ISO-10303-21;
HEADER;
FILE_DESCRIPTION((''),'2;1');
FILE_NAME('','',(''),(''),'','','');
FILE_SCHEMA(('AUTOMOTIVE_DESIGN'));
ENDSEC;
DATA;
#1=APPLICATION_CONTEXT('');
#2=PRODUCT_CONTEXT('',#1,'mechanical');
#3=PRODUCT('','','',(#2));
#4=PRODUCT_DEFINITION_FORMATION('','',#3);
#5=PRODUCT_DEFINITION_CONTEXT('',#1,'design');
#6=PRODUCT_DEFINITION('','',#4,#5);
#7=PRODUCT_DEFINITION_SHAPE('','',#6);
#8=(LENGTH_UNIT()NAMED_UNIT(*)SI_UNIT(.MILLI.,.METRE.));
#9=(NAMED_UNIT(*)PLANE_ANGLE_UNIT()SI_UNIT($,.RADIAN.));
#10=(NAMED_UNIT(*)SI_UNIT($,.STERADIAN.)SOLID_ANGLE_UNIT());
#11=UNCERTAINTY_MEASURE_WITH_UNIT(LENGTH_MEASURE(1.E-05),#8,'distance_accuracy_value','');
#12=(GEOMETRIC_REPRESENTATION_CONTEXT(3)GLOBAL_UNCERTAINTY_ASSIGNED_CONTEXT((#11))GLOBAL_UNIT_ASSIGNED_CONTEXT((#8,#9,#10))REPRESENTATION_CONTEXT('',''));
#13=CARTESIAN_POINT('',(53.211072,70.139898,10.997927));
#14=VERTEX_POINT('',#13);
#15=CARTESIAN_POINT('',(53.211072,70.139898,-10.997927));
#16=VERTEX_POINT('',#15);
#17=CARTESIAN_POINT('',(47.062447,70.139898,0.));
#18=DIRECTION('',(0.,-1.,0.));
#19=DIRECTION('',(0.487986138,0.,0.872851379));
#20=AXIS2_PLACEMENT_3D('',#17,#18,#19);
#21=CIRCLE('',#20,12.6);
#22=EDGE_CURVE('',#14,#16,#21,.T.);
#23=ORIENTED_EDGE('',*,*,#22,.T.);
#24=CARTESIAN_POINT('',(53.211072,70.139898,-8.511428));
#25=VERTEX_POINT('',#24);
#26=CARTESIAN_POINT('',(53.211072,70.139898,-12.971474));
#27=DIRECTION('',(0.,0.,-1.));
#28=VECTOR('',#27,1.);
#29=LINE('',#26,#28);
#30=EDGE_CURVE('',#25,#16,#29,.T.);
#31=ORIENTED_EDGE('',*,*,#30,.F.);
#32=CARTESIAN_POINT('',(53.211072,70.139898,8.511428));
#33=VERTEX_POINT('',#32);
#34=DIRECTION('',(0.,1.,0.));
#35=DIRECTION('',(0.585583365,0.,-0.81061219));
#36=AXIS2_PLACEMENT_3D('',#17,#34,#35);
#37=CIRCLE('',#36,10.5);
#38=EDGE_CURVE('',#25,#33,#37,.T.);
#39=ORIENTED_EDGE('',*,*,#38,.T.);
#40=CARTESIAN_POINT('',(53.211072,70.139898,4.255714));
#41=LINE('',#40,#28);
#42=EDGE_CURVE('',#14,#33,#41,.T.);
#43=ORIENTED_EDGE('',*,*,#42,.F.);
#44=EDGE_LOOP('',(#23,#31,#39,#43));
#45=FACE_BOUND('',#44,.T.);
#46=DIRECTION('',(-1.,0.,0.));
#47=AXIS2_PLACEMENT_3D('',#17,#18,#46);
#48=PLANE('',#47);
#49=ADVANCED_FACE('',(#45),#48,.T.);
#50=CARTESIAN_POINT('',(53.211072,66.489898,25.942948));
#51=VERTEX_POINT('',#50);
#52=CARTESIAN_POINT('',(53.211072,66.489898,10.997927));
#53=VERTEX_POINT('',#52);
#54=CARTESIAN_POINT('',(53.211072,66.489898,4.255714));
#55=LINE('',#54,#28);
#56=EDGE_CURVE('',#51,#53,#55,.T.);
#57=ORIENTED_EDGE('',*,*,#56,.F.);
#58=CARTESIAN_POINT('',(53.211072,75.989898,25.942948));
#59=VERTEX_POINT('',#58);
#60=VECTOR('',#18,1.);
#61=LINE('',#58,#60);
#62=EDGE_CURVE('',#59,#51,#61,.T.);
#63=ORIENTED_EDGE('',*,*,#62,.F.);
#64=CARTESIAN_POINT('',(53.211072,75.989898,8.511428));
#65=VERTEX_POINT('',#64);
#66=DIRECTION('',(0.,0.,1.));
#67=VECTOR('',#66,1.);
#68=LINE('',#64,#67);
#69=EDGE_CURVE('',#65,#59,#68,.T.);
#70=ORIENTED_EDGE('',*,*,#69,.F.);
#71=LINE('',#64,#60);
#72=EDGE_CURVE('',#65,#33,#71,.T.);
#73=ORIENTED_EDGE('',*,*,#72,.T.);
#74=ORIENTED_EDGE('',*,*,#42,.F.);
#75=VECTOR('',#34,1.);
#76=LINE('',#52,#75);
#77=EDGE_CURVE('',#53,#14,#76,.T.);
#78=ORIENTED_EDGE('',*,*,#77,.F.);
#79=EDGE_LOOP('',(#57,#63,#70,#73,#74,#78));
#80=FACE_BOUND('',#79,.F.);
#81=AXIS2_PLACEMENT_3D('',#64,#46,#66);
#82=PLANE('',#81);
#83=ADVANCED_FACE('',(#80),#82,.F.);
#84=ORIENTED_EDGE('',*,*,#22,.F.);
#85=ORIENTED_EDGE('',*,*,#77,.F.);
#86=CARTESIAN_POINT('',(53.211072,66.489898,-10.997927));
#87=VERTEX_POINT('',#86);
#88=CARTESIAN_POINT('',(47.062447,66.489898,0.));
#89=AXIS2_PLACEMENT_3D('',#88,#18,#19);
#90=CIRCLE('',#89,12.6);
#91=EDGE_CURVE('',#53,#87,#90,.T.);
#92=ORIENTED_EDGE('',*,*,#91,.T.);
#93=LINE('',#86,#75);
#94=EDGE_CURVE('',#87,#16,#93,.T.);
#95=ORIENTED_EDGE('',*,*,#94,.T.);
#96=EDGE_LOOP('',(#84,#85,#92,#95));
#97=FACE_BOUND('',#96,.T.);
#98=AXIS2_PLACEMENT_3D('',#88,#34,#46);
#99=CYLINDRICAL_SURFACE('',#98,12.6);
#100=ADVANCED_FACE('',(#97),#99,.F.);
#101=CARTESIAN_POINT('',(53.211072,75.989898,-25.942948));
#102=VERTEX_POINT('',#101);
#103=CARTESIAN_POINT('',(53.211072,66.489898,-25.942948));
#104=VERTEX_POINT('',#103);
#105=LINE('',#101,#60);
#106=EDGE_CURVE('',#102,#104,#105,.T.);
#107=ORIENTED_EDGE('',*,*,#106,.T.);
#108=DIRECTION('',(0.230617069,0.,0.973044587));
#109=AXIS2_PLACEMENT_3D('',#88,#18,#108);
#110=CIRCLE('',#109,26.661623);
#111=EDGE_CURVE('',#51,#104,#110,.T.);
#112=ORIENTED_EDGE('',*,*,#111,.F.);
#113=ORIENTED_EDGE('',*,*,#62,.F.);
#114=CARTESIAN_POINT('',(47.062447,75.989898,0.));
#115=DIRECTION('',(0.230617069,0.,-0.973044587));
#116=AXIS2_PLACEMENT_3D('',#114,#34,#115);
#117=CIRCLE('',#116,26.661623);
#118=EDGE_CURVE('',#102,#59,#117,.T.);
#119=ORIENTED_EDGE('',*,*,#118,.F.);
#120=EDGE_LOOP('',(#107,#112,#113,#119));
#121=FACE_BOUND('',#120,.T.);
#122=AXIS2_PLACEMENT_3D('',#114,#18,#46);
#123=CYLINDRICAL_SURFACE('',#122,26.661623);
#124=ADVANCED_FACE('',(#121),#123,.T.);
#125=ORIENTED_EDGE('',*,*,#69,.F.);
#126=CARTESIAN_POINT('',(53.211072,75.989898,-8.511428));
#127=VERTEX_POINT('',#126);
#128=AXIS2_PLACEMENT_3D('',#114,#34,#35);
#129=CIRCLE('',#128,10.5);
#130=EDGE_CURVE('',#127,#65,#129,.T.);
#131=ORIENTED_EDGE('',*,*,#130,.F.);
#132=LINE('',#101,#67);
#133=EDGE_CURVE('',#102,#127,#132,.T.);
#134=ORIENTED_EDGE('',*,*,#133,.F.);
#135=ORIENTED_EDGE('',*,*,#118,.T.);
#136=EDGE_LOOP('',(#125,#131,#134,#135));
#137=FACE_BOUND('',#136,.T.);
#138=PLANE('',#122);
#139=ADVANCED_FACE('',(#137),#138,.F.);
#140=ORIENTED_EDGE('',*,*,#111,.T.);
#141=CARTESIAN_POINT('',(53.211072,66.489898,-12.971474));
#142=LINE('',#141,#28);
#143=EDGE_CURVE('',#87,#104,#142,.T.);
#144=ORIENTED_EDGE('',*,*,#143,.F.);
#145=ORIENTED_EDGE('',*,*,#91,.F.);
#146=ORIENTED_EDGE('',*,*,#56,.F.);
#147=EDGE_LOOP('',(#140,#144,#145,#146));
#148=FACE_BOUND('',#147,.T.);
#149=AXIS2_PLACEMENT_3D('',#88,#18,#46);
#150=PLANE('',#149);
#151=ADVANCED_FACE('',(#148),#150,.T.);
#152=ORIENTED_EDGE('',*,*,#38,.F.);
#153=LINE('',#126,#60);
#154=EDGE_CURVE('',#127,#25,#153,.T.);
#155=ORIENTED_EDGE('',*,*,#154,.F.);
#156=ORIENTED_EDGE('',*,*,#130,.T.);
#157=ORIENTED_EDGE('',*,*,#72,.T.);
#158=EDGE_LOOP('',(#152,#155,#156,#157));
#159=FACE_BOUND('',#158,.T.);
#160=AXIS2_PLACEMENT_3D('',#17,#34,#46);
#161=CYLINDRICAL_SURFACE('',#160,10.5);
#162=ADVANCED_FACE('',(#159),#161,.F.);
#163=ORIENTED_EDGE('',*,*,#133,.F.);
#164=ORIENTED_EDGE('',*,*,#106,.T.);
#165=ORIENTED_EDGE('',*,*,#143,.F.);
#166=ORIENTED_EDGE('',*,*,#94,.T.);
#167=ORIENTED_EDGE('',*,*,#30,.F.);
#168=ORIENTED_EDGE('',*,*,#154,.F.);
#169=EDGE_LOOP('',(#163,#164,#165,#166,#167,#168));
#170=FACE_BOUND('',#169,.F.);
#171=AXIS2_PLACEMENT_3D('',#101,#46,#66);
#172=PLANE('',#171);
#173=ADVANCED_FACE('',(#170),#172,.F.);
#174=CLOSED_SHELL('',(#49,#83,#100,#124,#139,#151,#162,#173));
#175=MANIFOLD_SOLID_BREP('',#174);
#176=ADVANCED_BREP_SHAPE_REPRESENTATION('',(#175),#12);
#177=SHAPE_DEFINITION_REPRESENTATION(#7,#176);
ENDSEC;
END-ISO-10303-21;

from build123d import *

# Parameters (mm, degrees)
F6_DEPTH = 9.501


# Not quite as in the source:
# - a feature of the source that left no trace in its solid (it failed there, or was rolled back) is left out
# - the program builds the solid bodies; features that only make, move or delete a surface that nothing else refers to are left out


with BuildPart() as f4:
    # F0 (on Top) → F4 (revolve)
    with BuildSketch(Plane.XY):
        Polygon((34.4624469289, 70.1398981537), (36.5624469289, 70.1398981537), (36.5624469289, 75.9898981537), (20.4008240253, 75.9898981537), (20.4008240253, 66.4898981537), (28.4008240253, 66.4898981537), (34.4624469289, 66.4898981537), align=None)
    revolve(axis=Axis((47.0624469289, 47.4898981537, 0), (0, -1, 0)))

    # F5 (on face) → F6 (cut, through all)
    with BuildSketch(Plane(origin=(0, 75.9898981537, 0), x_dir=(-1, 0, 0), z_dir=(0, 1, 0))):
        with BuildLine():
            Line((-53.2110722647, 8.511427993), (-53.2110722647, 25.9429478343))
            ThreePointArc((-53.2110722647, 25.9429478343), (-73.7240698325, 0), (-53.2110722647, -25.9429478343))
            Line((-53.2110722647, -25.9429478343), (-53.2110722647, -8.511427993))
            ThreePointArc((-53.2110722647, -8.511427993), (-57.5624469289, 0), (-53.2110722647, 8.511427993))
        make_face()
    extrude(amount=-F6_DEPTH, mode=Mode.SUBTRACT)


solid = f4.part
